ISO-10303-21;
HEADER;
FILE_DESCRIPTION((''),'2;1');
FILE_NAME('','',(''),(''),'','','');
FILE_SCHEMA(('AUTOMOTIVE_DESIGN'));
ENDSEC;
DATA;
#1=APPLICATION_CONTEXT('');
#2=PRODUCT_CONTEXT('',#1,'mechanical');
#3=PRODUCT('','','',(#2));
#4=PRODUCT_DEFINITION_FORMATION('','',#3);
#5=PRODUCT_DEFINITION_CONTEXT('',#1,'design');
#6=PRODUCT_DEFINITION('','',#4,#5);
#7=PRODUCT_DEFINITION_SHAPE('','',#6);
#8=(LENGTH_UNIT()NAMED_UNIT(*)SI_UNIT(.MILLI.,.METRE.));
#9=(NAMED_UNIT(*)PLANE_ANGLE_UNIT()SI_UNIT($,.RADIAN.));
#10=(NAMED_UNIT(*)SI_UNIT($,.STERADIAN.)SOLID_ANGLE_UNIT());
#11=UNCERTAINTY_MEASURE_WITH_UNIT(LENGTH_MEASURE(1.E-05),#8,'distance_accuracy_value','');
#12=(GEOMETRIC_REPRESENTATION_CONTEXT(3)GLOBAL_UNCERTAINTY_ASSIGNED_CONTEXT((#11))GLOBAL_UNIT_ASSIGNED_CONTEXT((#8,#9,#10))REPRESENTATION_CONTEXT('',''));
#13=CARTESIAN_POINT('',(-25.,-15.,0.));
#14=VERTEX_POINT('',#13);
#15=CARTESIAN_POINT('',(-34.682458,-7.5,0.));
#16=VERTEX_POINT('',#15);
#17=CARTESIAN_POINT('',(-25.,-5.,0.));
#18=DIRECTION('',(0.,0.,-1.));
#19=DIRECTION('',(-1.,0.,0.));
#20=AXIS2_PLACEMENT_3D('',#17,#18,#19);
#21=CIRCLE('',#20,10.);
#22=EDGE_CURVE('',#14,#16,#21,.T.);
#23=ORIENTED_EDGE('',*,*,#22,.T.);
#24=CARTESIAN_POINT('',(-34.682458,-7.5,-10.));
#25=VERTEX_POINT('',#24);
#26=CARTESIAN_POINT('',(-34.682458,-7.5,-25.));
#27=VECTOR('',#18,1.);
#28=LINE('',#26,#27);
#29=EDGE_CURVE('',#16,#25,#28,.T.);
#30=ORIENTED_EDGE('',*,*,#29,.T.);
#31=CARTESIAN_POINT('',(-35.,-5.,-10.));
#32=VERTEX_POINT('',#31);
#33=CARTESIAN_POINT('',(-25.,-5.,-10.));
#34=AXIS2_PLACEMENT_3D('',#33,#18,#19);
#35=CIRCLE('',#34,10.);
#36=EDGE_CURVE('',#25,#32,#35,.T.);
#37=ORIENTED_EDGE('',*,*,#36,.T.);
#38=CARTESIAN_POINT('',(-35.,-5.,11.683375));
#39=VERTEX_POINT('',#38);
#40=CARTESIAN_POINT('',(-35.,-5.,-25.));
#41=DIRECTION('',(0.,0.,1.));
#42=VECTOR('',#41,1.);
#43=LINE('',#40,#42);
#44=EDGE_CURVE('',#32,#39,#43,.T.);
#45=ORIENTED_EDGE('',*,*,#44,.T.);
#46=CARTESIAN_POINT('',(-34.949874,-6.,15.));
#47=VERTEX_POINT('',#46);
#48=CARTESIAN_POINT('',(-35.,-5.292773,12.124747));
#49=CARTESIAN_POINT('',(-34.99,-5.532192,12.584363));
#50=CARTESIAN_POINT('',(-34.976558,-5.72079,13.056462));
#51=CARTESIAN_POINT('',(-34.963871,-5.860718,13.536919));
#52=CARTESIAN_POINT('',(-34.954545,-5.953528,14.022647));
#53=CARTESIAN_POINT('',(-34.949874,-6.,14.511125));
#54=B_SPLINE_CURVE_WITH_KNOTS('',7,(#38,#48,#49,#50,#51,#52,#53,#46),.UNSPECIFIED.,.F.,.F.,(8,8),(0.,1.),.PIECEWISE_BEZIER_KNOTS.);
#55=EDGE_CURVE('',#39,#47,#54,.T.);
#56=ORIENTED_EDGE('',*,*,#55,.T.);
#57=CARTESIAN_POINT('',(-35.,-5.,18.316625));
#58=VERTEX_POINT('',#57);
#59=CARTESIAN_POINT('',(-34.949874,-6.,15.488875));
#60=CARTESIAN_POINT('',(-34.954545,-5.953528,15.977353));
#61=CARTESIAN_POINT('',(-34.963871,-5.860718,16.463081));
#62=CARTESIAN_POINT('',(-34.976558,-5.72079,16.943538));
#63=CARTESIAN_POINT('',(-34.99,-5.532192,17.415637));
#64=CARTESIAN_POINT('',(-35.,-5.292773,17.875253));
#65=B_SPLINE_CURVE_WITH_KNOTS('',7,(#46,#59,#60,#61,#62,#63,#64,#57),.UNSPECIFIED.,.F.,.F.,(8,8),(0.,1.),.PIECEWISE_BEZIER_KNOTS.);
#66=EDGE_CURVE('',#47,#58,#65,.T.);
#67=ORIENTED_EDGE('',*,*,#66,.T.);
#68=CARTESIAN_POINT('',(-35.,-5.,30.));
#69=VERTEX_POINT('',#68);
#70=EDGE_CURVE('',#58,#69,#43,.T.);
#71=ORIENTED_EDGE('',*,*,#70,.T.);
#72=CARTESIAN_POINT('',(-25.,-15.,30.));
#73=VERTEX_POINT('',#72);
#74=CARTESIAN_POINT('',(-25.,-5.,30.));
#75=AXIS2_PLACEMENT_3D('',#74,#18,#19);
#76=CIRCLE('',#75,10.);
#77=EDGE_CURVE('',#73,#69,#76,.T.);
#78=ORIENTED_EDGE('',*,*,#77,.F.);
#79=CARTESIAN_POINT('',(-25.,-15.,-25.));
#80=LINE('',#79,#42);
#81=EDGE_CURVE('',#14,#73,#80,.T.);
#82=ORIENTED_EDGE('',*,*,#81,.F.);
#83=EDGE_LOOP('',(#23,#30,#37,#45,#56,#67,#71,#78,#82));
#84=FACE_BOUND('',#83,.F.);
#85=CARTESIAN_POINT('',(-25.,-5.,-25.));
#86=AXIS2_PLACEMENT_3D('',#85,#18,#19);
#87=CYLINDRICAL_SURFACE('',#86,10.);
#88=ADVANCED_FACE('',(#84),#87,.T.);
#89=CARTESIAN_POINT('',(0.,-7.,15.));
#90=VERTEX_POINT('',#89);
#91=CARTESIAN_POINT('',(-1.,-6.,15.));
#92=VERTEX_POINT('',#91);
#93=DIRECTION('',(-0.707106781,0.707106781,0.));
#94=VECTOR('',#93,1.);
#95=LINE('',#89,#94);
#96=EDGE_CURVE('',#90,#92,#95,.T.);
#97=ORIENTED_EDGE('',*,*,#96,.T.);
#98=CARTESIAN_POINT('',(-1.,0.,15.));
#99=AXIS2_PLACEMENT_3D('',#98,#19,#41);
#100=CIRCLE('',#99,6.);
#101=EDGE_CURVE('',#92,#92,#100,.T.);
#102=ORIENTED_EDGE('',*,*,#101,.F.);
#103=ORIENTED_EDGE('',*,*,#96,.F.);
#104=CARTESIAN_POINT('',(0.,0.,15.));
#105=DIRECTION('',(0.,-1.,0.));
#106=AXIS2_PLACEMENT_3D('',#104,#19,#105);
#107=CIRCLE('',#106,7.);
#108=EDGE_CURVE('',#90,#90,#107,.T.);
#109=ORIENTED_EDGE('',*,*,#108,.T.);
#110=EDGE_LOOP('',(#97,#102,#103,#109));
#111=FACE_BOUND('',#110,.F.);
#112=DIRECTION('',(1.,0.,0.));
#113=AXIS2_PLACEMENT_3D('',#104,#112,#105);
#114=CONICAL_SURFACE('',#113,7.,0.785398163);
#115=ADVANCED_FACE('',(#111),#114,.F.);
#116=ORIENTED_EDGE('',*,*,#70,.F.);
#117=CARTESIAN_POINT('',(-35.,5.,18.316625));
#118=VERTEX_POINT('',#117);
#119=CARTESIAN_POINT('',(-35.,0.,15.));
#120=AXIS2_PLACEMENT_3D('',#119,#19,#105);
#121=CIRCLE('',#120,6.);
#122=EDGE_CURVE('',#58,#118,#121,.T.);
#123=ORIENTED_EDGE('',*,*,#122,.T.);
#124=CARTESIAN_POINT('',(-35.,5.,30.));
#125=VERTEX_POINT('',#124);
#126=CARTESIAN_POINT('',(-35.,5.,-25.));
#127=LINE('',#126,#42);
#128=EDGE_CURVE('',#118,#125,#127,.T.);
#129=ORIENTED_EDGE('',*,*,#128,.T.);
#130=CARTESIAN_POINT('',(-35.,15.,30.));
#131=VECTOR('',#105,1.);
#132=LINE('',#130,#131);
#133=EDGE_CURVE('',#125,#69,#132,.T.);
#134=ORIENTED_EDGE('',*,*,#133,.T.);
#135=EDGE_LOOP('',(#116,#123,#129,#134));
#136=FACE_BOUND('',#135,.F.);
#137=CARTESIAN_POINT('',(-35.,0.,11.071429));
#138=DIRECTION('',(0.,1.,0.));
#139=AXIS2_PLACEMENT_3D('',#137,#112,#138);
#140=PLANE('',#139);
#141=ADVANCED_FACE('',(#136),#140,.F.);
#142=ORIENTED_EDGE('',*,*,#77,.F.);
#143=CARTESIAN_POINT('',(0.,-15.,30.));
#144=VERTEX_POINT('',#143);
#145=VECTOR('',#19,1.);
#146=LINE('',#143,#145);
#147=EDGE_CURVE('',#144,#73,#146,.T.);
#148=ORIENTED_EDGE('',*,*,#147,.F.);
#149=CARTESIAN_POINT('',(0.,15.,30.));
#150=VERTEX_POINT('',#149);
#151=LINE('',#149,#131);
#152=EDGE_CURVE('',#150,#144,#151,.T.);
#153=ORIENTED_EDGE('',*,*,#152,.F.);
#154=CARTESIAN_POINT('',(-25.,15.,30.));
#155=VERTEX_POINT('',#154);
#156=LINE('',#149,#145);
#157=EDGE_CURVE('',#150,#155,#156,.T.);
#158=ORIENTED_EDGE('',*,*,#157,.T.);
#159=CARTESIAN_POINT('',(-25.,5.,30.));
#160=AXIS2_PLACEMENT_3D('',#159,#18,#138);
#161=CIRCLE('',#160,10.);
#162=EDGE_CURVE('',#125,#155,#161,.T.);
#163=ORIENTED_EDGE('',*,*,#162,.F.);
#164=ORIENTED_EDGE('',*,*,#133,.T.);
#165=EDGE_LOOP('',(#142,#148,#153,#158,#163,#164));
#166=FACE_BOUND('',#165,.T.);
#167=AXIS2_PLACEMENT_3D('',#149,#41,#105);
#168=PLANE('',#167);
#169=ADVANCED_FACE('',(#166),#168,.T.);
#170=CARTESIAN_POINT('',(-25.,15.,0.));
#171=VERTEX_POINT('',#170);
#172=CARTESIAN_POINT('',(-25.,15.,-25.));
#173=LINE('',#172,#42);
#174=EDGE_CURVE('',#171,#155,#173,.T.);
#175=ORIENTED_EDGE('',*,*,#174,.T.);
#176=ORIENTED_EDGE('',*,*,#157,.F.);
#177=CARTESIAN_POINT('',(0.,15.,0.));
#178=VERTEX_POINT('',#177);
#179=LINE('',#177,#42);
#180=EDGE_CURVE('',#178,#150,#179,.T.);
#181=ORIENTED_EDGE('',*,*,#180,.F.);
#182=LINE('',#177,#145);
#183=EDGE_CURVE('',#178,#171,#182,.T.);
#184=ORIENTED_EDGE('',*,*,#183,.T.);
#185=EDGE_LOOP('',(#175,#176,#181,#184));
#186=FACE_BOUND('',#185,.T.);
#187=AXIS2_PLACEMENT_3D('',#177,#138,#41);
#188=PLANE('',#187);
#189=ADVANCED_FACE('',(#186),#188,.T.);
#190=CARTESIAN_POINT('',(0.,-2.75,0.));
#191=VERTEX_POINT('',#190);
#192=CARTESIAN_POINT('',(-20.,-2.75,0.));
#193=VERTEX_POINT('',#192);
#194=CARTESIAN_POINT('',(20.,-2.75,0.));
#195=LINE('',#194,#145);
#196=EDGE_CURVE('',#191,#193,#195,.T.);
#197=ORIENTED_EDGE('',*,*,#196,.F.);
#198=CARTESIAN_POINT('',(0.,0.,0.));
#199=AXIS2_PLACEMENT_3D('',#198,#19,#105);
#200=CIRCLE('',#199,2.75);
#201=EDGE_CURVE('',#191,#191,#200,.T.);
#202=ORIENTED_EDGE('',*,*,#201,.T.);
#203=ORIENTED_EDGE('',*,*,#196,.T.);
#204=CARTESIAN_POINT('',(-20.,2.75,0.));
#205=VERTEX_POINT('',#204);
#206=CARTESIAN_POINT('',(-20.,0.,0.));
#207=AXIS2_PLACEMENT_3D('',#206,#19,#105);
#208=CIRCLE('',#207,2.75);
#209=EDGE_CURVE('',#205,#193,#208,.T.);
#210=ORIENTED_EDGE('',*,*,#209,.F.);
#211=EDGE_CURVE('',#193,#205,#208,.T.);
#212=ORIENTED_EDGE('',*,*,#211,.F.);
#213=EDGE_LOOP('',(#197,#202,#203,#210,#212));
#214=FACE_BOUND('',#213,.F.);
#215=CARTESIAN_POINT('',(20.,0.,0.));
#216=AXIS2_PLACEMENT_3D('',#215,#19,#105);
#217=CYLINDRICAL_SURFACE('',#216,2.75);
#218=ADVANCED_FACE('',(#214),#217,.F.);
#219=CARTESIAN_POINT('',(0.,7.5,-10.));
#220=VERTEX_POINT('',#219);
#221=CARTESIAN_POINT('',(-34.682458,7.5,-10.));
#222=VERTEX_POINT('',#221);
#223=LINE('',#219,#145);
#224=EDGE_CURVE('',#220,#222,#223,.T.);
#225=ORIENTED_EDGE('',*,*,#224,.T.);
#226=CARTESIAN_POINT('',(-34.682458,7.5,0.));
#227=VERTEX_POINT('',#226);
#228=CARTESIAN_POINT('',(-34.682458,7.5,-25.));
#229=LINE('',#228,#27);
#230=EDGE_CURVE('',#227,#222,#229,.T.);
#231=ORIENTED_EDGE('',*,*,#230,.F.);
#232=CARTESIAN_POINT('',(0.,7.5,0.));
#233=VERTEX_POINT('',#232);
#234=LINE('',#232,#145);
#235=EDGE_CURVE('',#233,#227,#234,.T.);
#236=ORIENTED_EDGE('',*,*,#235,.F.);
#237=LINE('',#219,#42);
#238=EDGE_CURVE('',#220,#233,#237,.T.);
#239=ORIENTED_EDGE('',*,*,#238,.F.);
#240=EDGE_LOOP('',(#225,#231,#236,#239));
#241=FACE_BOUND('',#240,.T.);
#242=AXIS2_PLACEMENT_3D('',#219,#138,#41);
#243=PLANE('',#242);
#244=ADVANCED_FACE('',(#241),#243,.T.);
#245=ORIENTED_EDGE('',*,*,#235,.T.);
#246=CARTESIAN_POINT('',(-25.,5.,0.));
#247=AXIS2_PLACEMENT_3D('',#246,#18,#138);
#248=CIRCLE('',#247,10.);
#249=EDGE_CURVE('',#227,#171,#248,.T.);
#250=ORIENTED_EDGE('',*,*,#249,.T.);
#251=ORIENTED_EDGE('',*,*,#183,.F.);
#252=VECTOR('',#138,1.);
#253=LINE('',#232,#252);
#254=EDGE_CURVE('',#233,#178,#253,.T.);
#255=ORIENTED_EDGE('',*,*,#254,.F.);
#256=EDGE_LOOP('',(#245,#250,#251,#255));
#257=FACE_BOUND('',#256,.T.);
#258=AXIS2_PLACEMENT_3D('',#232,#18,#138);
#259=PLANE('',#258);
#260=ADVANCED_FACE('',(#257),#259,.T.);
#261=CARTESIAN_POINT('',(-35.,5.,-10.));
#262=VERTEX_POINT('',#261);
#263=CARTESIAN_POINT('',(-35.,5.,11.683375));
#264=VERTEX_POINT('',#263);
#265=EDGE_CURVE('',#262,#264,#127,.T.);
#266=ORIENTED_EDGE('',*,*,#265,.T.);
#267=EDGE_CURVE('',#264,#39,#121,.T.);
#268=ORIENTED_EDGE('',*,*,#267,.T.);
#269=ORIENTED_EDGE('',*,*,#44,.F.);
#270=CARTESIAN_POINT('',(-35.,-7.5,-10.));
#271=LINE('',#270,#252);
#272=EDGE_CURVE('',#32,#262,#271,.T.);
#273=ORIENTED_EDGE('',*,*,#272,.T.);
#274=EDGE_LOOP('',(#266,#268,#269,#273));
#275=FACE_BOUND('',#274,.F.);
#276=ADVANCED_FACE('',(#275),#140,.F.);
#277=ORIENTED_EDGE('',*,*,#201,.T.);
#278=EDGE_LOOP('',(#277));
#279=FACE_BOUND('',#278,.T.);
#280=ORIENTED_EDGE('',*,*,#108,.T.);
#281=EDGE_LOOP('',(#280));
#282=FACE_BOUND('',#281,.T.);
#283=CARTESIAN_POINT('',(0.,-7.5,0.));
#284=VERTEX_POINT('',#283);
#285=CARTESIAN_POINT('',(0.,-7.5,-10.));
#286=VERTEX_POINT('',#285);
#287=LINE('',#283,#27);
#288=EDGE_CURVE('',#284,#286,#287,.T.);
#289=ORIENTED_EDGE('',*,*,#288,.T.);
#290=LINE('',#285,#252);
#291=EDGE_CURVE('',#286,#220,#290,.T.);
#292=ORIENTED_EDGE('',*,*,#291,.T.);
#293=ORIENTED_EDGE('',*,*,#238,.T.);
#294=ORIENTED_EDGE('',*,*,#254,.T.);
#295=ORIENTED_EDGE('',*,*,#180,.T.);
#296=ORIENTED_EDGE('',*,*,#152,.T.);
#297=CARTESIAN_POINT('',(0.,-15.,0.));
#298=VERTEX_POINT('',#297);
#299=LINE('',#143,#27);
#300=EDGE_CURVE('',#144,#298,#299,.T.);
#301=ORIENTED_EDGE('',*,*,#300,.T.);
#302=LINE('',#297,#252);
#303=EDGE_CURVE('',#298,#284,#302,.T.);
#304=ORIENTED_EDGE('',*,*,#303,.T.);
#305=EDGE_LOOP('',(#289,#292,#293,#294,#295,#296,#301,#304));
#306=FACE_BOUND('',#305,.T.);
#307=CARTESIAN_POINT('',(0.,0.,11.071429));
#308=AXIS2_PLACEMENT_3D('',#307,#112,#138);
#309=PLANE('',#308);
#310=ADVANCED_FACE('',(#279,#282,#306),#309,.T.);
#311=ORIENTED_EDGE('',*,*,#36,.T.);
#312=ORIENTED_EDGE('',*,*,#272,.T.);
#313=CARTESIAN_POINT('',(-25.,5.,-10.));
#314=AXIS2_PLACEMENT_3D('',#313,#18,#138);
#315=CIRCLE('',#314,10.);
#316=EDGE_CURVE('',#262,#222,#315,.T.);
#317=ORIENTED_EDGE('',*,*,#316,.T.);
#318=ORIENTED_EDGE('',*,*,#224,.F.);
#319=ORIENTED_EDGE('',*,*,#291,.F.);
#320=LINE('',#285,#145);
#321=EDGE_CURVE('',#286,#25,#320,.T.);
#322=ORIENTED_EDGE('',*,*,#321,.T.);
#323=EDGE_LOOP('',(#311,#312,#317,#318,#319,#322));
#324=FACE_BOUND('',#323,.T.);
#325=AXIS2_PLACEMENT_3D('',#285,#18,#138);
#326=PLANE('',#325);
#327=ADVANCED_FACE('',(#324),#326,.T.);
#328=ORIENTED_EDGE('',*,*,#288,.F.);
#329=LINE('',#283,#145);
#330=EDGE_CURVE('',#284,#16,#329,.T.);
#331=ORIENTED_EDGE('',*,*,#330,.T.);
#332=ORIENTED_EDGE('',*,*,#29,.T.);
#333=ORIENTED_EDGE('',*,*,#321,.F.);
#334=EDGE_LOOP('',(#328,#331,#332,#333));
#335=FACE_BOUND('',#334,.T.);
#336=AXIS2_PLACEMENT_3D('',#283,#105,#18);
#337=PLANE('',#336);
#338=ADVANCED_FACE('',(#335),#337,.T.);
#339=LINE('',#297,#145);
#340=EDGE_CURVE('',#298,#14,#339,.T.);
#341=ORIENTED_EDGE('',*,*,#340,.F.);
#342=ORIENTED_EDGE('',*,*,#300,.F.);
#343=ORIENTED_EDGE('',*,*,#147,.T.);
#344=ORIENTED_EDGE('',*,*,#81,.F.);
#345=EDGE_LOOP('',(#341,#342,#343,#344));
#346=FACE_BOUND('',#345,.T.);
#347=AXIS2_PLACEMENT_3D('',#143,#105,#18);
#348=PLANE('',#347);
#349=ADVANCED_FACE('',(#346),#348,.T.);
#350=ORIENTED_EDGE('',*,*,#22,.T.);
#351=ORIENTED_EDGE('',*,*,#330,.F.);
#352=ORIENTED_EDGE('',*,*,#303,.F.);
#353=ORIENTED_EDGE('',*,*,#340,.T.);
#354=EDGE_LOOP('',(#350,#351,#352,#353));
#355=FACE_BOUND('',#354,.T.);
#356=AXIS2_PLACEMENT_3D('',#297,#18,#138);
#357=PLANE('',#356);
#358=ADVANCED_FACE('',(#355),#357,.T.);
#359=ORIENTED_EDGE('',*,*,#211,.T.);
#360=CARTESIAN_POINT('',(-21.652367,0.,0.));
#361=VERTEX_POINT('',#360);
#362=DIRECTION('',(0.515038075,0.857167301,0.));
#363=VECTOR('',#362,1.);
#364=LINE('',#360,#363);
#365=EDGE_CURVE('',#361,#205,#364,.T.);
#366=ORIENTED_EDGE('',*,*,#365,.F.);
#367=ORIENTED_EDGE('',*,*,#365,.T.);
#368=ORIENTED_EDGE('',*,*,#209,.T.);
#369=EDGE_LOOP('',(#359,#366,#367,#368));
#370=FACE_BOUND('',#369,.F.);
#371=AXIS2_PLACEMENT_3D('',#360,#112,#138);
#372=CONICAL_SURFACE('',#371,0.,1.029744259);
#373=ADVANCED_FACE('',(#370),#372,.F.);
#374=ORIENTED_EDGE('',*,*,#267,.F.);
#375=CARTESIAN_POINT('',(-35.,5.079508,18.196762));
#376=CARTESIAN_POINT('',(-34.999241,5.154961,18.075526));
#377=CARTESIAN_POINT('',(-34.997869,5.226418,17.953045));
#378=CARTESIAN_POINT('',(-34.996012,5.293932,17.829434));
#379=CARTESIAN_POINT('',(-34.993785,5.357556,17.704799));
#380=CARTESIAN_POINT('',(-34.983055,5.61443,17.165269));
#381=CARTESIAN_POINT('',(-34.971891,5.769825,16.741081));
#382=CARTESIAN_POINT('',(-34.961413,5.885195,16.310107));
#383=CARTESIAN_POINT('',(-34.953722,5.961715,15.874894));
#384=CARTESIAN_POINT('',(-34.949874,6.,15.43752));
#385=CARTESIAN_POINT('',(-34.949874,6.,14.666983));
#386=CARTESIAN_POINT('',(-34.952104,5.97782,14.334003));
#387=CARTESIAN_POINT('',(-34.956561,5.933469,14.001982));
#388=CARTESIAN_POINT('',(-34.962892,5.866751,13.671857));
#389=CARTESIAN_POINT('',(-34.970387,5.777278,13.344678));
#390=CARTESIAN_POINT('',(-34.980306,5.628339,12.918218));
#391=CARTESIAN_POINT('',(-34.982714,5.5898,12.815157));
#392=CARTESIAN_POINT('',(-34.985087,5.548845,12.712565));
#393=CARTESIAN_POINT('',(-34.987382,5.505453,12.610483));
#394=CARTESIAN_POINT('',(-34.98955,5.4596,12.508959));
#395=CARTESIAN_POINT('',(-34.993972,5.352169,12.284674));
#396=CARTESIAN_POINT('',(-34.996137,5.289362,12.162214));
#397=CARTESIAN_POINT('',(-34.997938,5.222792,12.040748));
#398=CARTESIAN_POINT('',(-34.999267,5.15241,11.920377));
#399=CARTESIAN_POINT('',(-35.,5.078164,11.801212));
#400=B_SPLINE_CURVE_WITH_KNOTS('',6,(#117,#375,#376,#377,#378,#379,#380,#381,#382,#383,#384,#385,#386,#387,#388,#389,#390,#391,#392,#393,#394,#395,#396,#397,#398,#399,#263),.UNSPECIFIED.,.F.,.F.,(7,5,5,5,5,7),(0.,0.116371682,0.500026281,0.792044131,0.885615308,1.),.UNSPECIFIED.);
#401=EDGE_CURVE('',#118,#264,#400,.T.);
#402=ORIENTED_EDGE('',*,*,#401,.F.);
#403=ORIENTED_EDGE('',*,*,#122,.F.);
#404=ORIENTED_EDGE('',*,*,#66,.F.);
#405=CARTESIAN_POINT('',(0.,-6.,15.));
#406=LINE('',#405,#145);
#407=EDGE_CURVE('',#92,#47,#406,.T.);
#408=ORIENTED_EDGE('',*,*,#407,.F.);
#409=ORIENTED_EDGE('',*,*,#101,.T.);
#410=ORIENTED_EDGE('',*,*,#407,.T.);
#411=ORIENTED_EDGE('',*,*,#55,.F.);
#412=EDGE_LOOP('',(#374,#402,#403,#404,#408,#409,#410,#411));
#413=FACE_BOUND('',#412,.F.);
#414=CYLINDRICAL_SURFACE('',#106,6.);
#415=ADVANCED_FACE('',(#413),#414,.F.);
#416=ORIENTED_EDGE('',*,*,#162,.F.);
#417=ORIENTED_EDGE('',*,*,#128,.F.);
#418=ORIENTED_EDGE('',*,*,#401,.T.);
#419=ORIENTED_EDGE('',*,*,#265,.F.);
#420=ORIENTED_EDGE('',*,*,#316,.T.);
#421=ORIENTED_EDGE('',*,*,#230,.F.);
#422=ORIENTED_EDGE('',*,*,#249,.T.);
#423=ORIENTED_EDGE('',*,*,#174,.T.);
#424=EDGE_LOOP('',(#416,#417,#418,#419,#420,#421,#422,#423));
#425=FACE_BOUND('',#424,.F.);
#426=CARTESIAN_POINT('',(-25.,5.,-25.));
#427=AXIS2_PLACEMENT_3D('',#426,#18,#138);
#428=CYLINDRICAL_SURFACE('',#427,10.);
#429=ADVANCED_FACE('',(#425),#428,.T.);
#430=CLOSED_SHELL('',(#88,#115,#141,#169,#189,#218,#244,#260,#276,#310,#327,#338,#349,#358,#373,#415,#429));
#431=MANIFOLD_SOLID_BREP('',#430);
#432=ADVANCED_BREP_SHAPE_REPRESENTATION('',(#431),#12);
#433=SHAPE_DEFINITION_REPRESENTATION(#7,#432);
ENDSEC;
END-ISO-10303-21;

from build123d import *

# Parameters (mm, degrees)
F1_DEPTH       = 35
F3_D           = 12
F3_CSINK_D     = 14
F3_CSINK_ANGLE = 90
F4_T1_DEPTH    = 80
F5_D           = 5.5
F5_DEPTH       = 20
F5_TIP         = 1.6523667023


# Not quite as in the source:
# - a fillet or chamfer that OpenCascade refuses, or shapes differently, is made with other operations: its cross-section is extruded or revolved along the edge and cut away or added


with BuildPart() as f1:
    # F0 (on Right) → F1 (new body)
    with BuildSketch(Plane.YZ):
        Polygon((15, 30), (0, 30), (-15, 30), (-15, 0), (-7.5, 0), (-7.5, -10), (0, -10), (7.5, -10), (7.5, 0), (15, 0), align=None)
    extrude(amount=-F1_DEPTH)

    # F3 (through all)
    with Locations(Plane.YZ):
        with Locations((0, 15)):
            CounterSinkHole(F3_D / 2, F3_CSINK_D / 2, counter_sink_angle=F3_CSINK_ANGLE)

    # F4: fillet of radius 10 on 2 edges, made by hand

    # F4_s2 → F4_t1 (cut)
    with BuildSketch(Plane.XY.offset(-25)):
        with BuildLine():
            ThreePointArc((-25, 15), (-32.0710678119, 12.0710678119), (-35, 5))
            Line((-35, 5), (-35, 15))
            Line((-35, 15), (-25, 15))
        make_face()
        with BuildLine():
            ThreePointArc((-35, -5), (-32.0710678119, -12.0710678119), (-25, -15))
            Line((-25, -15), (-35, -15))
            Line((-35, -15), (-35, -5))
        make_face()
    extrude(amount=F4_T1_DEPTH, mode=Mode.SUBTRACT)

    # F5
    with Locations(Plane.YZ):
        with Locations((0, 0)):
            Hole(F5_D / 2, depth=F5_DEPTH)
            with Locations((0, 0, -(F5_DEPTH + F5_TIP / 2))):  # 118° drill point
                Cone(0, F5_D / 2, F5_TIP, mode=Mode.SUBTRACT)


solid = f1.part
